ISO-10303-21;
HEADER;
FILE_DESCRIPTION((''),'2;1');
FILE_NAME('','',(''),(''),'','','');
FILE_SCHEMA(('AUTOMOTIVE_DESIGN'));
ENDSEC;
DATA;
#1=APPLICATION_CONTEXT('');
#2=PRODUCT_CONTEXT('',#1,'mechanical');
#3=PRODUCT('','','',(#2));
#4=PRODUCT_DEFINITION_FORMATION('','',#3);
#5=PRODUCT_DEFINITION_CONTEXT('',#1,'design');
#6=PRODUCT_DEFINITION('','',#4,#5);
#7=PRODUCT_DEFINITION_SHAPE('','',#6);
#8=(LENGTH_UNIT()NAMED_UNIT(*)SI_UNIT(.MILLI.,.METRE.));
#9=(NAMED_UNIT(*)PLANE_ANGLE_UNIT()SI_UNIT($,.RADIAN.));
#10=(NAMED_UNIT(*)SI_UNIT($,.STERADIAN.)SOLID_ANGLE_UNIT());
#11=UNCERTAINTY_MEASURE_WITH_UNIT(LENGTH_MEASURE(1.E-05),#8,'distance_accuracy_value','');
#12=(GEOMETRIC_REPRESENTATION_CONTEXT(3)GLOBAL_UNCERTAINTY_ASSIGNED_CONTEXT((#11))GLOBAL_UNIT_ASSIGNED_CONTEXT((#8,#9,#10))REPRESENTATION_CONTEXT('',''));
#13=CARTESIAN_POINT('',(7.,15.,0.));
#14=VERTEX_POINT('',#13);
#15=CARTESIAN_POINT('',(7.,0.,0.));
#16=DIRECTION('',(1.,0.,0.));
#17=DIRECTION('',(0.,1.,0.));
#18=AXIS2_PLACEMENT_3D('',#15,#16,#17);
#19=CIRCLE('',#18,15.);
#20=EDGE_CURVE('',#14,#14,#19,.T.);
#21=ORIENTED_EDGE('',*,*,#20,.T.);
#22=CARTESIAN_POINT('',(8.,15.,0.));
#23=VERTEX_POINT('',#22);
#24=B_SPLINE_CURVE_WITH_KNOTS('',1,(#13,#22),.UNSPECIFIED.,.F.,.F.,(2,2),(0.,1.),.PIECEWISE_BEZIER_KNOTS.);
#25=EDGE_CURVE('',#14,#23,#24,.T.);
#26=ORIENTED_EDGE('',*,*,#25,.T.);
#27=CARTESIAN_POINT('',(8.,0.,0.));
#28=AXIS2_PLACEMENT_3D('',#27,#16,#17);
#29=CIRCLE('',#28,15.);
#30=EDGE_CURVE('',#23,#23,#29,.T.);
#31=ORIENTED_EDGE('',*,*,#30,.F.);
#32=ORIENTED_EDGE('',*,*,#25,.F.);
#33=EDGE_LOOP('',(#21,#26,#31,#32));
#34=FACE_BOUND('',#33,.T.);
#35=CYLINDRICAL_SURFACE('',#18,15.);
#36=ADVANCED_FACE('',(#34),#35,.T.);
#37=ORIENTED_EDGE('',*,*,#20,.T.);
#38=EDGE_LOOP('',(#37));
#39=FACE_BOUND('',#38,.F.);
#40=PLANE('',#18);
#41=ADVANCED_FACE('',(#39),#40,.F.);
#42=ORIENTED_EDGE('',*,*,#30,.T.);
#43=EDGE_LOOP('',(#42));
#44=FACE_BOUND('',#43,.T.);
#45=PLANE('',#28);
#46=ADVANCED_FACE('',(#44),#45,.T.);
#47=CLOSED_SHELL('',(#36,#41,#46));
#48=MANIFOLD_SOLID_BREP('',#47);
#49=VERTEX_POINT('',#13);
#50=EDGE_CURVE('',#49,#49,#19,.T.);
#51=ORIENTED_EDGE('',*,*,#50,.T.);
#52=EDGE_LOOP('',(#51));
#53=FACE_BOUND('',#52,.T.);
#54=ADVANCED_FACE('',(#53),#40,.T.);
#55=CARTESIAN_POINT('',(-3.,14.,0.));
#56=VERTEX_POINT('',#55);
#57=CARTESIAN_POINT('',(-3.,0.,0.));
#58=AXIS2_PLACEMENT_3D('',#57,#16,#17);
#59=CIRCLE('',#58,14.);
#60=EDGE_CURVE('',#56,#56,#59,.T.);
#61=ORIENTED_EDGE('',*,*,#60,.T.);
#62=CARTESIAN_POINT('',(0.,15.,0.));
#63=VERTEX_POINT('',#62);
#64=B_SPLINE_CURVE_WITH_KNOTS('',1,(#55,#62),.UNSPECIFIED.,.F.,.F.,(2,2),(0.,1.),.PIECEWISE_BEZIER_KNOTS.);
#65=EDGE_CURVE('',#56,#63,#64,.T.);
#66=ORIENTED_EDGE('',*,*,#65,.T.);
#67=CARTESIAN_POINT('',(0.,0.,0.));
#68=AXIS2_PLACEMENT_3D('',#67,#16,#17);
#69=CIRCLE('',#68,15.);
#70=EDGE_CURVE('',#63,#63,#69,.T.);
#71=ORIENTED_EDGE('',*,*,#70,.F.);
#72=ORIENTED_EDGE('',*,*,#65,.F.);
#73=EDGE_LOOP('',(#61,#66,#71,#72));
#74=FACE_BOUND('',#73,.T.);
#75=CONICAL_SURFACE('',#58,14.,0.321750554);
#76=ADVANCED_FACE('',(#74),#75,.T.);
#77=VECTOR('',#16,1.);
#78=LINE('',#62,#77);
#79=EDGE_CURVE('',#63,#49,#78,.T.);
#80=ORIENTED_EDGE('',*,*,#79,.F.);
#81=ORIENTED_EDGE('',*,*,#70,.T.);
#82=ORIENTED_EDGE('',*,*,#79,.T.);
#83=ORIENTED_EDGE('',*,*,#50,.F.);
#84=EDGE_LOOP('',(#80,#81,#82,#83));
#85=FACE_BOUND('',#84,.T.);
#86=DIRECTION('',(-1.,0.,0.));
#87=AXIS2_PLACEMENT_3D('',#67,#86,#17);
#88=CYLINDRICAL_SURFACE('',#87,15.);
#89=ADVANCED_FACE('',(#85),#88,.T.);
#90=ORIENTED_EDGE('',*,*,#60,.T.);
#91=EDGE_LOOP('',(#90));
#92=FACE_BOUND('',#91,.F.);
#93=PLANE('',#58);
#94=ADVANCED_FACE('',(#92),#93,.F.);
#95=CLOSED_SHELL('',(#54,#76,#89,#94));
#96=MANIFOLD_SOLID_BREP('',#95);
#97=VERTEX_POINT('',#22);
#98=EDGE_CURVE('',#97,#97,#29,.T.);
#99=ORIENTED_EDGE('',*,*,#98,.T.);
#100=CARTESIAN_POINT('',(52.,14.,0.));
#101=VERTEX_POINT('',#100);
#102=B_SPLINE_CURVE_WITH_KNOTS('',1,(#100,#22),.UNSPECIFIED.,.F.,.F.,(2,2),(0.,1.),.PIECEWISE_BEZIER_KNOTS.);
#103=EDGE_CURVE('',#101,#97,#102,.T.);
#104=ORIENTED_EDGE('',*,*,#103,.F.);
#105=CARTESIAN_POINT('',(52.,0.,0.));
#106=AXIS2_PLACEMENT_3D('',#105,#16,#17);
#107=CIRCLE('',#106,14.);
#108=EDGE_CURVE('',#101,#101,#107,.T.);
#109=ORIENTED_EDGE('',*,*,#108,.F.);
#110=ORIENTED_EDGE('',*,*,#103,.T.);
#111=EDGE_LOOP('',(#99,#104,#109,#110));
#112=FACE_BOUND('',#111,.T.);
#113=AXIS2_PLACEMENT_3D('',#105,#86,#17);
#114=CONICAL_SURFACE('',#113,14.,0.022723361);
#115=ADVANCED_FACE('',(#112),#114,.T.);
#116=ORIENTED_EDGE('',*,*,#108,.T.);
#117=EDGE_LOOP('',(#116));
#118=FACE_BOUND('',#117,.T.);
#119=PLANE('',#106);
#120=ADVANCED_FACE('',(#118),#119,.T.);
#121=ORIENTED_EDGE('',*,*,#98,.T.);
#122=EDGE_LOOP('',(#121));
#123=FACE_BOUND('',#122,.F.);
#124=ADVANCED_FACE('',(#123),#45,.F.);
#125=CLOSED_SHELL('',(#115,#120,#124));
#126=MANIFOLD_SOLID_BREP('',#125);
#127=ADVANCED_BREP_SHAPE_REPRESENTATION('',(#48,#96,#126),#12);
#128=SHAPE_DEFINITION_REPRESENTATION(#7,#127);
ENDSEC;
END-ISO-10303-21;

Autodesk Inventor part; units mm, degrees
sketch "スケッチ1" plane through (0, 0, 0) normal (1, 0, 0) x (0, 1, 0)
  circle A0 centre (0, 0) radius 15
  point P0 (15, 0)
  dimension "d0" = 30
ref_plane "作業平面1" through (52, 0, 0) normal (1, 0, 0) x (0, 1, 0)
sketch "スケッチ2" plane through (52, 0, 0) normal (1, 0, 0) x (0, 1, 0)
  circle A0 centre (0, 0) radius 14
  line L0 (-12.3996, 6.5) -> (-12.3996, -6.5)
  dimension "d2" = 28
  dimension "d36" = 13
ref_plane "作業平面2" through (-3, 0, 0) normal (1, 0, 0) x (0, 1, 0)
sketch "スケッチ3" plane through (-3, 0, 0) normal (1, 0, 0) x (0, 1, 0)
  circle A0 centre (0, 0) radius 14
  dimension "d4" = 28
ref_plane "作業平面3" through (0, 0, 0) normal (0, 0, -1) x (0, 1, 0)
ref_plane "作業平面5" through (8, 0, 0) normal (1, 0, 0) x (0, 1, 0)
ref_plane "作業平面4" through (7, 0, 0) normal (1, 0, 0) x (0, 1, 0)
sketch "スケッチ5" plane through (7, 0, 0) normal (1, 0, 0) x (0, 1, 0)
  circle A0 centre (0, 0) radius 15
  dimension "d20" = 30
sketch "スケッチ6" plane through (8, 0, 0) normal (1, 0, 0) x (0, 1, 0)
  circle A0 centre (0, 0) radius 15
  dimension "d21" = 30
loft "ロフト3" add profiles "スケッチ5", "スケッチ6"
extrude "押し出し1" add sketch "スケッチ1" along normal up to surface (7 mm away) separate body
loft "ロフト4" add profiles "スケッチ3" bodies 2 section 2 edges at (0, -15, 0)
loft "ロフト5" add profiles "スケッチ2" separate body section 2 edges at (8, -15, 0)
properties part number "3.2MEGA-PIXELS-WEBCAMERA" material "アルミニウム 6061"
